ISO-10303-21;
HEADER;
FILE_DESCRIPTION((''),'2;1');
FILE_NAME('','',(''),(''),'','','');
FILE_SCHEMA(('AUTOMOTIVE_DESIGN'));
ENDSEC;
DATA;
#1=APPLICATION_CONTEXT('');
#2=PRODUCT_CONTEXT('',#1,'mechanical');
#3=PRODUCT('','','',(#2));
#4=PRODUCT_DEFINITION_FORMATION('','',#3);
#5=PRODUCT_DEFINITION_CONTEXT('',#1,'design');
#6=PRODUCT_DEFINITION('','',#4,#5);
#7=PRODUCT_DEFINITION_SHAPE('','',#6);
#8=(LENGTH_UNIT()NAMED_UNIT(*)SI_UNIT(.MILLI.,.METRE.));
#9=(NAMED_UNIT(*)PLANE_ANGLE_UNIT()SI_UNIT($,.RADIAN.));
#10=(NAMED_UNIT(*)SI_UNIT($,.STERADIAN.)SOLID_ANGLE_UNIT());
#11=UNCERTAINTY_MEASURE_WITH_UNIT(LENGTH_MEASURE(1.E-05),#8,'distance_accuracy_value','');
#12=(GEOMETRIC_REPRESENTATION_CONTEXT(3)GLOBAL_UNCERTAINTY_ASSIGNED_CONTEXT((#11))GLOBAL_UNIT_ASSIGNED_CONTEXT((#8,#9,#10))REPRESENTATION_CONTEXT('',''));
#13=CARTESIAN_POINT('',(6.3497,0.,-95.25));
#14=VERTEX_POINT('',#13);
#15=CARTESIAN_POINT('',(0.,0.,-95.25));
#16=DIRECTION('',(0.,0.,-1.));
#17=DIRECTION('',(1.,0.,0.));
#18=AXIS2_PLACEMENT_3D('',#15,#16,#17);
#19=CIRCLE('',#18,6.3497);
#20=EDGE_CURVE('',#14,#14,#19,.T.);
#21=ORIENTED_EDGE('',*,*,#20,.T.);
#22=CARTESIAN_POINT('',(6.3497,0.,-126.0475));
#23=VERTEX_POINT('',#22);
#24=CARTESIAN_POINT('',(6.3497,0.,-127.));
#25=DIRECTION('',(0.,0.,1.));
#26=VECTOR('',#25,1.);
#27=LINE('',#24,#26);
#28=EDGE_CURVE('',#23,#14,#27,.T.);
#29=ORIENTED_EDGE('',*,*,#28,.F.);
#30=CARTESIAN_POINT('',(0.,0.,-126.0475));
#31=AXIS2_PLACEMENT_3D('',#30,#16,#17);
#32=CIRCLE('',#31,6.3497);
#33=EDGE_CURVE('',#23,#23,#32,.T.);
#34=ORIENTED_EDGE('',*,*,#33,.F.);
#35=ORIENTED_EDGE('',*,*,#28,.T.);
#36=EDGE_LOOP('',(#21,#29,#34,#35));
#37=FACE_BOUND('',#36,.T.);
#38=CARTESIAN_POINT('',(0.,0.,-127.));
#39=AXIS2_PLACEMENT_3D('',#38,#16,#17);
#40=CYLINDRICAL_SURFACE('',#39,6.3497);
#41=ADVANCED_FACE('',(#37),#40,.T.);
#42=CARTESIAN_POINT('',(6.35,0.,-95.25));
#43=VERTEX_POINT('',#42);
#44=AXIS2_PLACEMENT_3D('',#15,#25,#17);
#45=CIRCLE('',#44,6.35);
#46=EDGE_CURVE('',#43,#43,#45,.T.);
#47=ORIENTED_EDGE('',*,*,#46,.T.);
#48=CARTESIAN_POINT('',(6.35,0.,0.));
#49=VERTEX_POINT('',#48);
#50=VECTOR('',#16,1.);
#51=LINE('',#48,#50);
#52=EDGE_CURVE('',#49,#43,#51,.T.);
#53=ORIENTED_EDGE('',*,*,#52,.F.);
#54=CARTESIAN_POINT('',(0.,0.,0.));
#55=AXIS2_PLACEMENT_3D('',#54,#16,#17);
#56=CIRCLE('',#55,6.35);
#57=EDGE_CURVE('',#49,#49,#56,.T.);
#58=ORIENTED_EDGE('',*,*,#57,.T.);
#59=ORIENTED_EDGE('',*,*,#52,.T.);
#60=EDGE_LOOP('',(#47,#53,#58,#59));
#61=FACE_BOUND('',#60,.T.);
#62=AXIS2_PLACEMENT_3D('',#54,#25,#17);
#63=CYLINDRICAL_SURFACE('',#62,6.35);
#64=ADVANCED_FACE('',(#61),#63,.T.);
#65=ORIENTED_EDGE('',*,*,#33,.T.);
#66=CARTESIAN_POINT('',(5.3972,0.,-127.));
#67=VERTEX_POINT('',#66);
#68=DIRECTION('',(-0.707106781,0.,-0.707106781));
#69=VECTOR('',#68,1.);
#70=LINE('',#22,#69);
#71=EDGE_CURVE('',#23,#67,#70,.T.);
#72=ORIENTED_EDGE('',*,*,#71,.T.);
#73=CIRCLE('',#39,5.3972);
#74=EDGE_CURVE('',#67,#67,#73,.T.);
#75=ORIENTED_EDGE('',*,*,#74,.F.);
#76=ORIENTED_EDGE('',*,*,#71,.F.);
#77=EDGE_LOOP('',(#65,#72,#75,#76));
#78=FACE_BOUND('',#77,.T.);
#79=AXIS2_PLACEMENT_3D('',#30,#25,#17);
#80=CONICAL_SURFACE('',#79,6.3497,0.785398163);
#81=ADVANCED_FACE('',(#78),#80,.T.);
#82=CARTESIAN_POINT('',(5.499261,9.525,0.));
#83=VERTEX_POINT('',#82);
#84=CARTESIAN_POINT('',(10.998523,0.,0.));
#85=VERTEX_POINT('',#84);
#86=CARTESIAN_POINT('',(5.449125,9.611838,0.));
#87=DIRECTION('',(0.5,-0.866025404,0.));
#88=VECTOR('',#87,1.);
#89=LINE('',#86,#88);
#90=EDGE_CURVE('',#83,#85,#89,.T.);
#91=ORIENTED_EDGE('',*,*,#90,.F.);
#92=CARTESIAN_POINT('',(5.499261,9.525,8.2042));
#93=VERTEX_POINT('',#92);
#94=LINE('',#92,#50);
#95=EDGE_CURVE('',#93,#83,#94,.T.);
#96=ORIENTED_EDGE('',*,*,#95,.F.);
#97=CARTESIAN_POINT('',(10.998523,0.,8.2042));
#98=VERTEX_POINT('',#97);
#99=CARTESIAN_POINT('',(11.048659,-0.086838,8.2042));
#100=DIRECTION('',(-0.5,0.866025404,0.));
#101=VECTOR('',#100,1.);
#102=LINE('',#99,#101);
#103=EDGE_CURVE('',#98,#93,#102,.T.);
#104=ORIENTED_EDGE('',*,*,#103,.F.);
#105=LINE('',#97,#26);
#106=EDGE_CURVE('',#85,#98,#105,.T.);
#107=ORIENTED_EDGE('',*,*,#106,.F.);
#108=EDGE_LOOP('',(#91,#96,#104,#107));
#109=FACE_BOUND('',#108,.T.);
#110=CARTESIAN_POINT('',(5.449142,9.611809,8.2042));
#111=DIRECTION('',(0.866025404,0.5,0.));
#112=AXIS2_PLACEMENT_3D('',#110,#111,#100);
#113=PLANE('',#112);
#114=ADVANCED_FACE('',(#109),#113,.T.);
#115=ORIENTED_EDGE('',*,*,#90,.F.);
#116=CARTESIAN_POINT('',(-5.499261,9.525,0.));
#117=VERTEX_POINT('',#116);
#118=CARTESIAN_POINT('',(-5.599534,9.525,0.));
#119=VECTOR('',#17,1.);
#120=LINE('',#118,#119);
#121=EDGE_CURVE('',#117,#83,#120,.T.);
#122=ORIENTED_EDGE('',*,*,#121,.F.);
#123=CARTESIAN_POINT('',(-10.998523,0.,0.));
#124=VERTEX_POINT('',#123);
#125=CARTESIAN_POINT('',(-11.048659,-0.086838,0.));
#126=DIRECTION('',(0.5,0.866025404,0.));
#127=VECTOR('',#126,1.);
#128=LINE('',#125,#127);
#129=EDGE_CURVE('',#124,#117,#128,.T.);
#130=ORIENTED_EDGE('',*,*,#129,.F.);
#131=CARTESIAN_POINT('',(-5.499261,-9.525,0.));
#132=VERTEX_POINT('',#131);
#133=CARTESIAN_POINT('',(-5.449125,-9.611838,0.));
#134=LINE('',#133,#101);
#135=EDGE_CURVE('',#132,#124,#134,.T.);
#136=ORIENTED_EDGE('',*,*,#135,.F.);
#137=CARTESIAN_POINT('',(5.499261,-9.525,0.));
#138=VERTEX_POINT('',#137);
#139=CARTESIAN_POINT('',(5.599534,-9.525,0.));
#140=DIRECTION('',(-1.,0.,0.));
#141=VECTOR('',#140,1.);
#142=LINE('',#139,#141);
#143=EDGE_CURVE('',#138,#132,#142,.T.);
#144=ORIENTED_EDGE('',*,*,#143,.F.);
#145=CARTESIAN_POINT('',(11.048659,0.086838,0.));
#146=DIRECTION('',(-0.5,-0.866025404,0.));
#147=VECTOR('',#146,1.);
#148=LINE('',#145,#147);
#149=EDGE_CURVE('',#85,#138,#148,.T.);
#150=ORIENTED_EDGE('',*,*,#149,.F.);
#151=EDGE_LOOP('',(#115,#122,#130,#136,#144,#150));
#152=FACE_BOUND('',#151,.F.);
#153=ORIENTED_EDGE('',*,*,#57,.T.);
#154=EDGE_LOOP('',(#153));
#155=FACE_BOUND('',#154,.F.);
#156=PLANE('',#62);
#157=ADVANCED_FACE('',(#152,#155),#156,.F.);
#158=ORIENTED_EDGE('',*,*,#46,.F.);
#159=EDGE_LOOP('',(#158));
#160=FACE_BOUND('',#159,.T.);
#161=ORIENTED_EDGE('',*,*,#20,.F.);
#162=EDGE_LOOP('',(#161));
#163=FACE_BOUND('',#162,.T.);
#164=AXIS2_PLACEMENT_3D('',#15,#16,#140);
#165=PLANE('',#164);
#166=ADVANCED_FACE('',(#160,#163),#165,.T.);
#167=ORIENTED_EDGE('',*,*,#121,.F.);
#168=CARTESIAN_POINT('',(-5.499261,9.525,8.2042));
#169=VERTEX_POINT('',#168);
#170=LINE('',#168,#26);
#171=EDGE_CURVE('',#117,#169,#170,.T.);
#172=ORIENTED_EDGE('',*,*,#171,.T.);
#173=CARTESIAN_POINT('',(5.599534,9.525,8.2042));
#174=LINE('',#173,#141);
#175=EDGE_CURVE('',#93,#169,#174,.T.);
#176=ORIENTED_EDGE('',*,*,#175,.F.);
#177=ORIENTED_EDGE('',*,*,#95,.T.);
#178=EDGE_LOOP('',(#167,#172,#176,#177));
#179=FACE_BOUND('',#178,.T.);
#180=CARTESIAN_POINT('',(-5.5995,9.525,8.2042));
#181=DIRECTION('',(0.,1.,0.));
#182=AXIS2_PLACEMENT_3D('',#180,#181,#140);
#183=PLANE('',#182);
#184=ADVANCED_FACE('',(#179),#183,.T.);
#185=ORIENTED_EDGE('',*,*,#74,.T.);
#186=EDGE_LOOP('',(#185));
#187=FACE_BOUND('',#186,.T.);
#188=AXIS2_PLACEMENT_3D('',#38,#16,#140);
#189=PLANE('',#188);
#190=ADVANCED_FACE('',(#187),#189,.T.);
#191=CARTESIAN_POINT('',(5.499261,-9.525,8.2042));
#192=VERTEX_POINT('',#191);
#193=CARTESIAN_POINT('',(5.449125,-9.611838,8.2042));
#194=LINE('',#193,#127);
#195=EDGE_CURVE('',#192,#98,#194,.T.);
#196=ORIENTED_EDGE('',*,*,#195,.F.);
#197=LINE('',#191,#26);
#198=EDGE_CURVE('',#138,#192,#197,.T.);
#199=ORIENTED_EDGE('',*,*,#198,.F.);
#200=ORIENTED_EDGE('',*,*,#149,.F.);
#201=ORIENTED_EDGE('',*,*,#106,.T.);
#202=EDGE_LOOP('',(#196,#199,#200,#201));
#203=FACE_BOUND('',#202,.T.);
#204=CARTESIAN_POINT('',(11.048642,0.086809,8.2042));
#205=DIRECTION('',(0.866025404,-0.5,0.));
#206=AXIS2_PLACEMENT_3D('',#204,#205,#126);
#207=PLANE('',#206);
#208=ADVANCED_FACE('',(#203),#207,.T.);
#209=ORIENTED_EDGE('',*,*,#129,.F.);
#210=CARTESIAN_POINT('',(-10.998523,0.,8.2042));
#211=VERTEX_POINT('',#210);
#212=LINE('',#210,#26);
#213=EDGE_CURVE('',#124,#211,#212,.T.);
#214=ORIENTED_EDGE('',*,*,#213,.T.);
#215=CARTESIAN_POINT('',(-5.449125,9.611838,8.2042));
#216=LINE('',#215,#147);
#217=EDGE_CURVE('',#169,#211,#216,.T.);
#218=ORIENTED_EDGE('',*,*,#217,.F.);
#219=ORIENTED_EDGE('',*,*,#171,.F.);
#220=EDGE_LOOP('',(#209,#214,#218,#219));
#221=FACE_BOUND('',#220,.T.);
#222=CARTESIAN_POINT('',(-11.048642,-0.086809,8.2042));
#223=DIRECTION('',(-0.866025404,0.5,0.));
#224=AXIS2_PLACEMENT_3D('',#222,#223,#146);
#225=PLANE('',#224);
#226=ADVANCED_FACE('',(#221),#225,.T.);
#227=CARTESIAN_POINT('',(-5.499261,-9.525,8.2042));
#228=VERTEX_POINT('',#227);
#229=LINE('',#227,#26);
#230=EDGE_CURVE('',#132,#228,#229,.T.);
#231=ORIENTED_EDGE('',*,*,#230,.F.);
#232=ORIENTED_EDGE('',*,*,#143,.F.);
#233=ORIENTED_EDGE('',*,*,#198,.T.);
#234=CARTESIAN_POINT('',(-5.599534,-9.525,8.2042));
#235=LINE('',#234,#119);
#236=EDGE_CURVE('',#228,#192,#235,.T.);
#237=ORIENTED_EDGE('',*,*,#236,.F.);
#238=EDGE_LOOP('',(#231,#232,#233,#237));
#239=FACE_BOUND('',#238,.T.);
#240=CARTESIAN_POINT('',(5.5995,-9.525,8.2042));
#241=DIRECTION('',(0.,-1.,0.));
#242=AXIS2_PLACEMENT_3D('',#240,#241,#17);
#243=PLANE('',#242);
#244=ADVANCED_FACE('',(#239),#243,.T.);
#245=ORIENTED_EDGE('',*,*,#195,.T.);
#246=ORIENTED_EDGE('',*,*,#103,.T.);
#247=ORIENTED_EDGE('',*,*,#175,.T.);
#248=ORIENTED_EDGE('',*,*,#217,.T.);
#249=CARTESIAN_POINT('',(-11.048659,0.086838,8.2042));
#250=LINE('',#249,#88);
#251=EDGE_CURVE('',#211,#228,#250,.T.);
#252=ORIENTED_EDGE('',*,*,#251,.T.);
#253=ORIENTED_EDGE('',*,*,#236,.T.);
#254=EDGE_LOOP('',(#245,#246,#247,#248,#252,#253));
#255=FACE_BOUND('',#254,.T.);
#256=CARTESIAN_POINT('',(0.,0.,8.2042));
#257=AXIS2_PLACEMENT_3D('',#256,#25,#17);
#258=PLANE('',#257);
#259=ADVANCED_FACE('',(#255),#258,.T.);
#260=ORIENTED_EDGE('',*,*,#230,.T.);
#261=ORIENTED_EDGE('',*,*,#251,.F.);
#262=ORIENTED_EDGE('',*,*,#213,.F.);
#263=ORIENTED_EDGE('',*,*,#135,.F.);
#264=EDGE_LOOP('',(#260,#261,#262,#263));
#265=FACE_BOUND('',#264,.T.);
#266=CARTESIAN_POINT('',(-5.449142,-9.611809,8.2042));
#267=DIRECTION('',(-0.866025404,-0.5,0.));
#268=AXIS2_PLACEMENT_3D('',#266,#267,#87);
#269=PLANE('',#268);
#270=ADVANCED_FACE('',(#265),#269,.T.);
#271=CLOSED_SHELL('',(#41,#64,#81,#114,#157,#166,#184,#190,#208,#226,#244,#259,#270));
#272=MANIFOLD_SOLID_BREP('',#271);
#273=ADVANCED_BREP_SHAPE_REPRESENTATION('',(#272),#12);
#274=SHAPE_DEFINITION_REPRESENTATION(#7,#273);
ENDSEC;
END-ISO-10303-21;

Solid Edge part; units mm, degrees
sketch "Sketch1" plane through (0, 0, 0) normal (0, 0, 1) x (1, 0, 0)
  circle A0 centre (0, 0) radius 11.049
  dimension "D1" = 22.098
extrude "Protrusion1" add sketch "Sketch1" along normal blind 8.2042
sketch "Sketch2" plane through (0, 0, 0) normal (0, 0, -1) x (1, 0, 0)
  circle A0 centre (0, 0) radius 6.35
extrude "Protrusion2" add sketch "Sketch2" along normal blind 127
sketch "Sketch3" plane through (0, 0, -127) normal (0, 0, -1) x (1, 0, 0)
  circle A0 centre (0, 0) radius 6.3497
extrude "Cutout1" cut sketch "Sketch3" against normal blind 31.75 flip side to cut
chamfer "Chamfer_1" distance 0.9525 angle 45 1 edges at (-6.3497, 0, -127)
sketch "Sketch4" plane through (0, 0, 8.2042) normal (0, 0, 1) x (1, 0, 0)
  line L0 (-5.5995, 9.525) -> (5.5995, 9.525)
  dimension "D1" = 19.05
extrude "Cutout2" cut sketch "Sketch4" against normal up to next material side at (0, 9.575, 8.2042)
pattern_circular "Pattern1" count 6 over 360 about axis through (0, 0, 8.2042) along (0, 0, 1) of "Cutout2"
properties part number "24102129"
